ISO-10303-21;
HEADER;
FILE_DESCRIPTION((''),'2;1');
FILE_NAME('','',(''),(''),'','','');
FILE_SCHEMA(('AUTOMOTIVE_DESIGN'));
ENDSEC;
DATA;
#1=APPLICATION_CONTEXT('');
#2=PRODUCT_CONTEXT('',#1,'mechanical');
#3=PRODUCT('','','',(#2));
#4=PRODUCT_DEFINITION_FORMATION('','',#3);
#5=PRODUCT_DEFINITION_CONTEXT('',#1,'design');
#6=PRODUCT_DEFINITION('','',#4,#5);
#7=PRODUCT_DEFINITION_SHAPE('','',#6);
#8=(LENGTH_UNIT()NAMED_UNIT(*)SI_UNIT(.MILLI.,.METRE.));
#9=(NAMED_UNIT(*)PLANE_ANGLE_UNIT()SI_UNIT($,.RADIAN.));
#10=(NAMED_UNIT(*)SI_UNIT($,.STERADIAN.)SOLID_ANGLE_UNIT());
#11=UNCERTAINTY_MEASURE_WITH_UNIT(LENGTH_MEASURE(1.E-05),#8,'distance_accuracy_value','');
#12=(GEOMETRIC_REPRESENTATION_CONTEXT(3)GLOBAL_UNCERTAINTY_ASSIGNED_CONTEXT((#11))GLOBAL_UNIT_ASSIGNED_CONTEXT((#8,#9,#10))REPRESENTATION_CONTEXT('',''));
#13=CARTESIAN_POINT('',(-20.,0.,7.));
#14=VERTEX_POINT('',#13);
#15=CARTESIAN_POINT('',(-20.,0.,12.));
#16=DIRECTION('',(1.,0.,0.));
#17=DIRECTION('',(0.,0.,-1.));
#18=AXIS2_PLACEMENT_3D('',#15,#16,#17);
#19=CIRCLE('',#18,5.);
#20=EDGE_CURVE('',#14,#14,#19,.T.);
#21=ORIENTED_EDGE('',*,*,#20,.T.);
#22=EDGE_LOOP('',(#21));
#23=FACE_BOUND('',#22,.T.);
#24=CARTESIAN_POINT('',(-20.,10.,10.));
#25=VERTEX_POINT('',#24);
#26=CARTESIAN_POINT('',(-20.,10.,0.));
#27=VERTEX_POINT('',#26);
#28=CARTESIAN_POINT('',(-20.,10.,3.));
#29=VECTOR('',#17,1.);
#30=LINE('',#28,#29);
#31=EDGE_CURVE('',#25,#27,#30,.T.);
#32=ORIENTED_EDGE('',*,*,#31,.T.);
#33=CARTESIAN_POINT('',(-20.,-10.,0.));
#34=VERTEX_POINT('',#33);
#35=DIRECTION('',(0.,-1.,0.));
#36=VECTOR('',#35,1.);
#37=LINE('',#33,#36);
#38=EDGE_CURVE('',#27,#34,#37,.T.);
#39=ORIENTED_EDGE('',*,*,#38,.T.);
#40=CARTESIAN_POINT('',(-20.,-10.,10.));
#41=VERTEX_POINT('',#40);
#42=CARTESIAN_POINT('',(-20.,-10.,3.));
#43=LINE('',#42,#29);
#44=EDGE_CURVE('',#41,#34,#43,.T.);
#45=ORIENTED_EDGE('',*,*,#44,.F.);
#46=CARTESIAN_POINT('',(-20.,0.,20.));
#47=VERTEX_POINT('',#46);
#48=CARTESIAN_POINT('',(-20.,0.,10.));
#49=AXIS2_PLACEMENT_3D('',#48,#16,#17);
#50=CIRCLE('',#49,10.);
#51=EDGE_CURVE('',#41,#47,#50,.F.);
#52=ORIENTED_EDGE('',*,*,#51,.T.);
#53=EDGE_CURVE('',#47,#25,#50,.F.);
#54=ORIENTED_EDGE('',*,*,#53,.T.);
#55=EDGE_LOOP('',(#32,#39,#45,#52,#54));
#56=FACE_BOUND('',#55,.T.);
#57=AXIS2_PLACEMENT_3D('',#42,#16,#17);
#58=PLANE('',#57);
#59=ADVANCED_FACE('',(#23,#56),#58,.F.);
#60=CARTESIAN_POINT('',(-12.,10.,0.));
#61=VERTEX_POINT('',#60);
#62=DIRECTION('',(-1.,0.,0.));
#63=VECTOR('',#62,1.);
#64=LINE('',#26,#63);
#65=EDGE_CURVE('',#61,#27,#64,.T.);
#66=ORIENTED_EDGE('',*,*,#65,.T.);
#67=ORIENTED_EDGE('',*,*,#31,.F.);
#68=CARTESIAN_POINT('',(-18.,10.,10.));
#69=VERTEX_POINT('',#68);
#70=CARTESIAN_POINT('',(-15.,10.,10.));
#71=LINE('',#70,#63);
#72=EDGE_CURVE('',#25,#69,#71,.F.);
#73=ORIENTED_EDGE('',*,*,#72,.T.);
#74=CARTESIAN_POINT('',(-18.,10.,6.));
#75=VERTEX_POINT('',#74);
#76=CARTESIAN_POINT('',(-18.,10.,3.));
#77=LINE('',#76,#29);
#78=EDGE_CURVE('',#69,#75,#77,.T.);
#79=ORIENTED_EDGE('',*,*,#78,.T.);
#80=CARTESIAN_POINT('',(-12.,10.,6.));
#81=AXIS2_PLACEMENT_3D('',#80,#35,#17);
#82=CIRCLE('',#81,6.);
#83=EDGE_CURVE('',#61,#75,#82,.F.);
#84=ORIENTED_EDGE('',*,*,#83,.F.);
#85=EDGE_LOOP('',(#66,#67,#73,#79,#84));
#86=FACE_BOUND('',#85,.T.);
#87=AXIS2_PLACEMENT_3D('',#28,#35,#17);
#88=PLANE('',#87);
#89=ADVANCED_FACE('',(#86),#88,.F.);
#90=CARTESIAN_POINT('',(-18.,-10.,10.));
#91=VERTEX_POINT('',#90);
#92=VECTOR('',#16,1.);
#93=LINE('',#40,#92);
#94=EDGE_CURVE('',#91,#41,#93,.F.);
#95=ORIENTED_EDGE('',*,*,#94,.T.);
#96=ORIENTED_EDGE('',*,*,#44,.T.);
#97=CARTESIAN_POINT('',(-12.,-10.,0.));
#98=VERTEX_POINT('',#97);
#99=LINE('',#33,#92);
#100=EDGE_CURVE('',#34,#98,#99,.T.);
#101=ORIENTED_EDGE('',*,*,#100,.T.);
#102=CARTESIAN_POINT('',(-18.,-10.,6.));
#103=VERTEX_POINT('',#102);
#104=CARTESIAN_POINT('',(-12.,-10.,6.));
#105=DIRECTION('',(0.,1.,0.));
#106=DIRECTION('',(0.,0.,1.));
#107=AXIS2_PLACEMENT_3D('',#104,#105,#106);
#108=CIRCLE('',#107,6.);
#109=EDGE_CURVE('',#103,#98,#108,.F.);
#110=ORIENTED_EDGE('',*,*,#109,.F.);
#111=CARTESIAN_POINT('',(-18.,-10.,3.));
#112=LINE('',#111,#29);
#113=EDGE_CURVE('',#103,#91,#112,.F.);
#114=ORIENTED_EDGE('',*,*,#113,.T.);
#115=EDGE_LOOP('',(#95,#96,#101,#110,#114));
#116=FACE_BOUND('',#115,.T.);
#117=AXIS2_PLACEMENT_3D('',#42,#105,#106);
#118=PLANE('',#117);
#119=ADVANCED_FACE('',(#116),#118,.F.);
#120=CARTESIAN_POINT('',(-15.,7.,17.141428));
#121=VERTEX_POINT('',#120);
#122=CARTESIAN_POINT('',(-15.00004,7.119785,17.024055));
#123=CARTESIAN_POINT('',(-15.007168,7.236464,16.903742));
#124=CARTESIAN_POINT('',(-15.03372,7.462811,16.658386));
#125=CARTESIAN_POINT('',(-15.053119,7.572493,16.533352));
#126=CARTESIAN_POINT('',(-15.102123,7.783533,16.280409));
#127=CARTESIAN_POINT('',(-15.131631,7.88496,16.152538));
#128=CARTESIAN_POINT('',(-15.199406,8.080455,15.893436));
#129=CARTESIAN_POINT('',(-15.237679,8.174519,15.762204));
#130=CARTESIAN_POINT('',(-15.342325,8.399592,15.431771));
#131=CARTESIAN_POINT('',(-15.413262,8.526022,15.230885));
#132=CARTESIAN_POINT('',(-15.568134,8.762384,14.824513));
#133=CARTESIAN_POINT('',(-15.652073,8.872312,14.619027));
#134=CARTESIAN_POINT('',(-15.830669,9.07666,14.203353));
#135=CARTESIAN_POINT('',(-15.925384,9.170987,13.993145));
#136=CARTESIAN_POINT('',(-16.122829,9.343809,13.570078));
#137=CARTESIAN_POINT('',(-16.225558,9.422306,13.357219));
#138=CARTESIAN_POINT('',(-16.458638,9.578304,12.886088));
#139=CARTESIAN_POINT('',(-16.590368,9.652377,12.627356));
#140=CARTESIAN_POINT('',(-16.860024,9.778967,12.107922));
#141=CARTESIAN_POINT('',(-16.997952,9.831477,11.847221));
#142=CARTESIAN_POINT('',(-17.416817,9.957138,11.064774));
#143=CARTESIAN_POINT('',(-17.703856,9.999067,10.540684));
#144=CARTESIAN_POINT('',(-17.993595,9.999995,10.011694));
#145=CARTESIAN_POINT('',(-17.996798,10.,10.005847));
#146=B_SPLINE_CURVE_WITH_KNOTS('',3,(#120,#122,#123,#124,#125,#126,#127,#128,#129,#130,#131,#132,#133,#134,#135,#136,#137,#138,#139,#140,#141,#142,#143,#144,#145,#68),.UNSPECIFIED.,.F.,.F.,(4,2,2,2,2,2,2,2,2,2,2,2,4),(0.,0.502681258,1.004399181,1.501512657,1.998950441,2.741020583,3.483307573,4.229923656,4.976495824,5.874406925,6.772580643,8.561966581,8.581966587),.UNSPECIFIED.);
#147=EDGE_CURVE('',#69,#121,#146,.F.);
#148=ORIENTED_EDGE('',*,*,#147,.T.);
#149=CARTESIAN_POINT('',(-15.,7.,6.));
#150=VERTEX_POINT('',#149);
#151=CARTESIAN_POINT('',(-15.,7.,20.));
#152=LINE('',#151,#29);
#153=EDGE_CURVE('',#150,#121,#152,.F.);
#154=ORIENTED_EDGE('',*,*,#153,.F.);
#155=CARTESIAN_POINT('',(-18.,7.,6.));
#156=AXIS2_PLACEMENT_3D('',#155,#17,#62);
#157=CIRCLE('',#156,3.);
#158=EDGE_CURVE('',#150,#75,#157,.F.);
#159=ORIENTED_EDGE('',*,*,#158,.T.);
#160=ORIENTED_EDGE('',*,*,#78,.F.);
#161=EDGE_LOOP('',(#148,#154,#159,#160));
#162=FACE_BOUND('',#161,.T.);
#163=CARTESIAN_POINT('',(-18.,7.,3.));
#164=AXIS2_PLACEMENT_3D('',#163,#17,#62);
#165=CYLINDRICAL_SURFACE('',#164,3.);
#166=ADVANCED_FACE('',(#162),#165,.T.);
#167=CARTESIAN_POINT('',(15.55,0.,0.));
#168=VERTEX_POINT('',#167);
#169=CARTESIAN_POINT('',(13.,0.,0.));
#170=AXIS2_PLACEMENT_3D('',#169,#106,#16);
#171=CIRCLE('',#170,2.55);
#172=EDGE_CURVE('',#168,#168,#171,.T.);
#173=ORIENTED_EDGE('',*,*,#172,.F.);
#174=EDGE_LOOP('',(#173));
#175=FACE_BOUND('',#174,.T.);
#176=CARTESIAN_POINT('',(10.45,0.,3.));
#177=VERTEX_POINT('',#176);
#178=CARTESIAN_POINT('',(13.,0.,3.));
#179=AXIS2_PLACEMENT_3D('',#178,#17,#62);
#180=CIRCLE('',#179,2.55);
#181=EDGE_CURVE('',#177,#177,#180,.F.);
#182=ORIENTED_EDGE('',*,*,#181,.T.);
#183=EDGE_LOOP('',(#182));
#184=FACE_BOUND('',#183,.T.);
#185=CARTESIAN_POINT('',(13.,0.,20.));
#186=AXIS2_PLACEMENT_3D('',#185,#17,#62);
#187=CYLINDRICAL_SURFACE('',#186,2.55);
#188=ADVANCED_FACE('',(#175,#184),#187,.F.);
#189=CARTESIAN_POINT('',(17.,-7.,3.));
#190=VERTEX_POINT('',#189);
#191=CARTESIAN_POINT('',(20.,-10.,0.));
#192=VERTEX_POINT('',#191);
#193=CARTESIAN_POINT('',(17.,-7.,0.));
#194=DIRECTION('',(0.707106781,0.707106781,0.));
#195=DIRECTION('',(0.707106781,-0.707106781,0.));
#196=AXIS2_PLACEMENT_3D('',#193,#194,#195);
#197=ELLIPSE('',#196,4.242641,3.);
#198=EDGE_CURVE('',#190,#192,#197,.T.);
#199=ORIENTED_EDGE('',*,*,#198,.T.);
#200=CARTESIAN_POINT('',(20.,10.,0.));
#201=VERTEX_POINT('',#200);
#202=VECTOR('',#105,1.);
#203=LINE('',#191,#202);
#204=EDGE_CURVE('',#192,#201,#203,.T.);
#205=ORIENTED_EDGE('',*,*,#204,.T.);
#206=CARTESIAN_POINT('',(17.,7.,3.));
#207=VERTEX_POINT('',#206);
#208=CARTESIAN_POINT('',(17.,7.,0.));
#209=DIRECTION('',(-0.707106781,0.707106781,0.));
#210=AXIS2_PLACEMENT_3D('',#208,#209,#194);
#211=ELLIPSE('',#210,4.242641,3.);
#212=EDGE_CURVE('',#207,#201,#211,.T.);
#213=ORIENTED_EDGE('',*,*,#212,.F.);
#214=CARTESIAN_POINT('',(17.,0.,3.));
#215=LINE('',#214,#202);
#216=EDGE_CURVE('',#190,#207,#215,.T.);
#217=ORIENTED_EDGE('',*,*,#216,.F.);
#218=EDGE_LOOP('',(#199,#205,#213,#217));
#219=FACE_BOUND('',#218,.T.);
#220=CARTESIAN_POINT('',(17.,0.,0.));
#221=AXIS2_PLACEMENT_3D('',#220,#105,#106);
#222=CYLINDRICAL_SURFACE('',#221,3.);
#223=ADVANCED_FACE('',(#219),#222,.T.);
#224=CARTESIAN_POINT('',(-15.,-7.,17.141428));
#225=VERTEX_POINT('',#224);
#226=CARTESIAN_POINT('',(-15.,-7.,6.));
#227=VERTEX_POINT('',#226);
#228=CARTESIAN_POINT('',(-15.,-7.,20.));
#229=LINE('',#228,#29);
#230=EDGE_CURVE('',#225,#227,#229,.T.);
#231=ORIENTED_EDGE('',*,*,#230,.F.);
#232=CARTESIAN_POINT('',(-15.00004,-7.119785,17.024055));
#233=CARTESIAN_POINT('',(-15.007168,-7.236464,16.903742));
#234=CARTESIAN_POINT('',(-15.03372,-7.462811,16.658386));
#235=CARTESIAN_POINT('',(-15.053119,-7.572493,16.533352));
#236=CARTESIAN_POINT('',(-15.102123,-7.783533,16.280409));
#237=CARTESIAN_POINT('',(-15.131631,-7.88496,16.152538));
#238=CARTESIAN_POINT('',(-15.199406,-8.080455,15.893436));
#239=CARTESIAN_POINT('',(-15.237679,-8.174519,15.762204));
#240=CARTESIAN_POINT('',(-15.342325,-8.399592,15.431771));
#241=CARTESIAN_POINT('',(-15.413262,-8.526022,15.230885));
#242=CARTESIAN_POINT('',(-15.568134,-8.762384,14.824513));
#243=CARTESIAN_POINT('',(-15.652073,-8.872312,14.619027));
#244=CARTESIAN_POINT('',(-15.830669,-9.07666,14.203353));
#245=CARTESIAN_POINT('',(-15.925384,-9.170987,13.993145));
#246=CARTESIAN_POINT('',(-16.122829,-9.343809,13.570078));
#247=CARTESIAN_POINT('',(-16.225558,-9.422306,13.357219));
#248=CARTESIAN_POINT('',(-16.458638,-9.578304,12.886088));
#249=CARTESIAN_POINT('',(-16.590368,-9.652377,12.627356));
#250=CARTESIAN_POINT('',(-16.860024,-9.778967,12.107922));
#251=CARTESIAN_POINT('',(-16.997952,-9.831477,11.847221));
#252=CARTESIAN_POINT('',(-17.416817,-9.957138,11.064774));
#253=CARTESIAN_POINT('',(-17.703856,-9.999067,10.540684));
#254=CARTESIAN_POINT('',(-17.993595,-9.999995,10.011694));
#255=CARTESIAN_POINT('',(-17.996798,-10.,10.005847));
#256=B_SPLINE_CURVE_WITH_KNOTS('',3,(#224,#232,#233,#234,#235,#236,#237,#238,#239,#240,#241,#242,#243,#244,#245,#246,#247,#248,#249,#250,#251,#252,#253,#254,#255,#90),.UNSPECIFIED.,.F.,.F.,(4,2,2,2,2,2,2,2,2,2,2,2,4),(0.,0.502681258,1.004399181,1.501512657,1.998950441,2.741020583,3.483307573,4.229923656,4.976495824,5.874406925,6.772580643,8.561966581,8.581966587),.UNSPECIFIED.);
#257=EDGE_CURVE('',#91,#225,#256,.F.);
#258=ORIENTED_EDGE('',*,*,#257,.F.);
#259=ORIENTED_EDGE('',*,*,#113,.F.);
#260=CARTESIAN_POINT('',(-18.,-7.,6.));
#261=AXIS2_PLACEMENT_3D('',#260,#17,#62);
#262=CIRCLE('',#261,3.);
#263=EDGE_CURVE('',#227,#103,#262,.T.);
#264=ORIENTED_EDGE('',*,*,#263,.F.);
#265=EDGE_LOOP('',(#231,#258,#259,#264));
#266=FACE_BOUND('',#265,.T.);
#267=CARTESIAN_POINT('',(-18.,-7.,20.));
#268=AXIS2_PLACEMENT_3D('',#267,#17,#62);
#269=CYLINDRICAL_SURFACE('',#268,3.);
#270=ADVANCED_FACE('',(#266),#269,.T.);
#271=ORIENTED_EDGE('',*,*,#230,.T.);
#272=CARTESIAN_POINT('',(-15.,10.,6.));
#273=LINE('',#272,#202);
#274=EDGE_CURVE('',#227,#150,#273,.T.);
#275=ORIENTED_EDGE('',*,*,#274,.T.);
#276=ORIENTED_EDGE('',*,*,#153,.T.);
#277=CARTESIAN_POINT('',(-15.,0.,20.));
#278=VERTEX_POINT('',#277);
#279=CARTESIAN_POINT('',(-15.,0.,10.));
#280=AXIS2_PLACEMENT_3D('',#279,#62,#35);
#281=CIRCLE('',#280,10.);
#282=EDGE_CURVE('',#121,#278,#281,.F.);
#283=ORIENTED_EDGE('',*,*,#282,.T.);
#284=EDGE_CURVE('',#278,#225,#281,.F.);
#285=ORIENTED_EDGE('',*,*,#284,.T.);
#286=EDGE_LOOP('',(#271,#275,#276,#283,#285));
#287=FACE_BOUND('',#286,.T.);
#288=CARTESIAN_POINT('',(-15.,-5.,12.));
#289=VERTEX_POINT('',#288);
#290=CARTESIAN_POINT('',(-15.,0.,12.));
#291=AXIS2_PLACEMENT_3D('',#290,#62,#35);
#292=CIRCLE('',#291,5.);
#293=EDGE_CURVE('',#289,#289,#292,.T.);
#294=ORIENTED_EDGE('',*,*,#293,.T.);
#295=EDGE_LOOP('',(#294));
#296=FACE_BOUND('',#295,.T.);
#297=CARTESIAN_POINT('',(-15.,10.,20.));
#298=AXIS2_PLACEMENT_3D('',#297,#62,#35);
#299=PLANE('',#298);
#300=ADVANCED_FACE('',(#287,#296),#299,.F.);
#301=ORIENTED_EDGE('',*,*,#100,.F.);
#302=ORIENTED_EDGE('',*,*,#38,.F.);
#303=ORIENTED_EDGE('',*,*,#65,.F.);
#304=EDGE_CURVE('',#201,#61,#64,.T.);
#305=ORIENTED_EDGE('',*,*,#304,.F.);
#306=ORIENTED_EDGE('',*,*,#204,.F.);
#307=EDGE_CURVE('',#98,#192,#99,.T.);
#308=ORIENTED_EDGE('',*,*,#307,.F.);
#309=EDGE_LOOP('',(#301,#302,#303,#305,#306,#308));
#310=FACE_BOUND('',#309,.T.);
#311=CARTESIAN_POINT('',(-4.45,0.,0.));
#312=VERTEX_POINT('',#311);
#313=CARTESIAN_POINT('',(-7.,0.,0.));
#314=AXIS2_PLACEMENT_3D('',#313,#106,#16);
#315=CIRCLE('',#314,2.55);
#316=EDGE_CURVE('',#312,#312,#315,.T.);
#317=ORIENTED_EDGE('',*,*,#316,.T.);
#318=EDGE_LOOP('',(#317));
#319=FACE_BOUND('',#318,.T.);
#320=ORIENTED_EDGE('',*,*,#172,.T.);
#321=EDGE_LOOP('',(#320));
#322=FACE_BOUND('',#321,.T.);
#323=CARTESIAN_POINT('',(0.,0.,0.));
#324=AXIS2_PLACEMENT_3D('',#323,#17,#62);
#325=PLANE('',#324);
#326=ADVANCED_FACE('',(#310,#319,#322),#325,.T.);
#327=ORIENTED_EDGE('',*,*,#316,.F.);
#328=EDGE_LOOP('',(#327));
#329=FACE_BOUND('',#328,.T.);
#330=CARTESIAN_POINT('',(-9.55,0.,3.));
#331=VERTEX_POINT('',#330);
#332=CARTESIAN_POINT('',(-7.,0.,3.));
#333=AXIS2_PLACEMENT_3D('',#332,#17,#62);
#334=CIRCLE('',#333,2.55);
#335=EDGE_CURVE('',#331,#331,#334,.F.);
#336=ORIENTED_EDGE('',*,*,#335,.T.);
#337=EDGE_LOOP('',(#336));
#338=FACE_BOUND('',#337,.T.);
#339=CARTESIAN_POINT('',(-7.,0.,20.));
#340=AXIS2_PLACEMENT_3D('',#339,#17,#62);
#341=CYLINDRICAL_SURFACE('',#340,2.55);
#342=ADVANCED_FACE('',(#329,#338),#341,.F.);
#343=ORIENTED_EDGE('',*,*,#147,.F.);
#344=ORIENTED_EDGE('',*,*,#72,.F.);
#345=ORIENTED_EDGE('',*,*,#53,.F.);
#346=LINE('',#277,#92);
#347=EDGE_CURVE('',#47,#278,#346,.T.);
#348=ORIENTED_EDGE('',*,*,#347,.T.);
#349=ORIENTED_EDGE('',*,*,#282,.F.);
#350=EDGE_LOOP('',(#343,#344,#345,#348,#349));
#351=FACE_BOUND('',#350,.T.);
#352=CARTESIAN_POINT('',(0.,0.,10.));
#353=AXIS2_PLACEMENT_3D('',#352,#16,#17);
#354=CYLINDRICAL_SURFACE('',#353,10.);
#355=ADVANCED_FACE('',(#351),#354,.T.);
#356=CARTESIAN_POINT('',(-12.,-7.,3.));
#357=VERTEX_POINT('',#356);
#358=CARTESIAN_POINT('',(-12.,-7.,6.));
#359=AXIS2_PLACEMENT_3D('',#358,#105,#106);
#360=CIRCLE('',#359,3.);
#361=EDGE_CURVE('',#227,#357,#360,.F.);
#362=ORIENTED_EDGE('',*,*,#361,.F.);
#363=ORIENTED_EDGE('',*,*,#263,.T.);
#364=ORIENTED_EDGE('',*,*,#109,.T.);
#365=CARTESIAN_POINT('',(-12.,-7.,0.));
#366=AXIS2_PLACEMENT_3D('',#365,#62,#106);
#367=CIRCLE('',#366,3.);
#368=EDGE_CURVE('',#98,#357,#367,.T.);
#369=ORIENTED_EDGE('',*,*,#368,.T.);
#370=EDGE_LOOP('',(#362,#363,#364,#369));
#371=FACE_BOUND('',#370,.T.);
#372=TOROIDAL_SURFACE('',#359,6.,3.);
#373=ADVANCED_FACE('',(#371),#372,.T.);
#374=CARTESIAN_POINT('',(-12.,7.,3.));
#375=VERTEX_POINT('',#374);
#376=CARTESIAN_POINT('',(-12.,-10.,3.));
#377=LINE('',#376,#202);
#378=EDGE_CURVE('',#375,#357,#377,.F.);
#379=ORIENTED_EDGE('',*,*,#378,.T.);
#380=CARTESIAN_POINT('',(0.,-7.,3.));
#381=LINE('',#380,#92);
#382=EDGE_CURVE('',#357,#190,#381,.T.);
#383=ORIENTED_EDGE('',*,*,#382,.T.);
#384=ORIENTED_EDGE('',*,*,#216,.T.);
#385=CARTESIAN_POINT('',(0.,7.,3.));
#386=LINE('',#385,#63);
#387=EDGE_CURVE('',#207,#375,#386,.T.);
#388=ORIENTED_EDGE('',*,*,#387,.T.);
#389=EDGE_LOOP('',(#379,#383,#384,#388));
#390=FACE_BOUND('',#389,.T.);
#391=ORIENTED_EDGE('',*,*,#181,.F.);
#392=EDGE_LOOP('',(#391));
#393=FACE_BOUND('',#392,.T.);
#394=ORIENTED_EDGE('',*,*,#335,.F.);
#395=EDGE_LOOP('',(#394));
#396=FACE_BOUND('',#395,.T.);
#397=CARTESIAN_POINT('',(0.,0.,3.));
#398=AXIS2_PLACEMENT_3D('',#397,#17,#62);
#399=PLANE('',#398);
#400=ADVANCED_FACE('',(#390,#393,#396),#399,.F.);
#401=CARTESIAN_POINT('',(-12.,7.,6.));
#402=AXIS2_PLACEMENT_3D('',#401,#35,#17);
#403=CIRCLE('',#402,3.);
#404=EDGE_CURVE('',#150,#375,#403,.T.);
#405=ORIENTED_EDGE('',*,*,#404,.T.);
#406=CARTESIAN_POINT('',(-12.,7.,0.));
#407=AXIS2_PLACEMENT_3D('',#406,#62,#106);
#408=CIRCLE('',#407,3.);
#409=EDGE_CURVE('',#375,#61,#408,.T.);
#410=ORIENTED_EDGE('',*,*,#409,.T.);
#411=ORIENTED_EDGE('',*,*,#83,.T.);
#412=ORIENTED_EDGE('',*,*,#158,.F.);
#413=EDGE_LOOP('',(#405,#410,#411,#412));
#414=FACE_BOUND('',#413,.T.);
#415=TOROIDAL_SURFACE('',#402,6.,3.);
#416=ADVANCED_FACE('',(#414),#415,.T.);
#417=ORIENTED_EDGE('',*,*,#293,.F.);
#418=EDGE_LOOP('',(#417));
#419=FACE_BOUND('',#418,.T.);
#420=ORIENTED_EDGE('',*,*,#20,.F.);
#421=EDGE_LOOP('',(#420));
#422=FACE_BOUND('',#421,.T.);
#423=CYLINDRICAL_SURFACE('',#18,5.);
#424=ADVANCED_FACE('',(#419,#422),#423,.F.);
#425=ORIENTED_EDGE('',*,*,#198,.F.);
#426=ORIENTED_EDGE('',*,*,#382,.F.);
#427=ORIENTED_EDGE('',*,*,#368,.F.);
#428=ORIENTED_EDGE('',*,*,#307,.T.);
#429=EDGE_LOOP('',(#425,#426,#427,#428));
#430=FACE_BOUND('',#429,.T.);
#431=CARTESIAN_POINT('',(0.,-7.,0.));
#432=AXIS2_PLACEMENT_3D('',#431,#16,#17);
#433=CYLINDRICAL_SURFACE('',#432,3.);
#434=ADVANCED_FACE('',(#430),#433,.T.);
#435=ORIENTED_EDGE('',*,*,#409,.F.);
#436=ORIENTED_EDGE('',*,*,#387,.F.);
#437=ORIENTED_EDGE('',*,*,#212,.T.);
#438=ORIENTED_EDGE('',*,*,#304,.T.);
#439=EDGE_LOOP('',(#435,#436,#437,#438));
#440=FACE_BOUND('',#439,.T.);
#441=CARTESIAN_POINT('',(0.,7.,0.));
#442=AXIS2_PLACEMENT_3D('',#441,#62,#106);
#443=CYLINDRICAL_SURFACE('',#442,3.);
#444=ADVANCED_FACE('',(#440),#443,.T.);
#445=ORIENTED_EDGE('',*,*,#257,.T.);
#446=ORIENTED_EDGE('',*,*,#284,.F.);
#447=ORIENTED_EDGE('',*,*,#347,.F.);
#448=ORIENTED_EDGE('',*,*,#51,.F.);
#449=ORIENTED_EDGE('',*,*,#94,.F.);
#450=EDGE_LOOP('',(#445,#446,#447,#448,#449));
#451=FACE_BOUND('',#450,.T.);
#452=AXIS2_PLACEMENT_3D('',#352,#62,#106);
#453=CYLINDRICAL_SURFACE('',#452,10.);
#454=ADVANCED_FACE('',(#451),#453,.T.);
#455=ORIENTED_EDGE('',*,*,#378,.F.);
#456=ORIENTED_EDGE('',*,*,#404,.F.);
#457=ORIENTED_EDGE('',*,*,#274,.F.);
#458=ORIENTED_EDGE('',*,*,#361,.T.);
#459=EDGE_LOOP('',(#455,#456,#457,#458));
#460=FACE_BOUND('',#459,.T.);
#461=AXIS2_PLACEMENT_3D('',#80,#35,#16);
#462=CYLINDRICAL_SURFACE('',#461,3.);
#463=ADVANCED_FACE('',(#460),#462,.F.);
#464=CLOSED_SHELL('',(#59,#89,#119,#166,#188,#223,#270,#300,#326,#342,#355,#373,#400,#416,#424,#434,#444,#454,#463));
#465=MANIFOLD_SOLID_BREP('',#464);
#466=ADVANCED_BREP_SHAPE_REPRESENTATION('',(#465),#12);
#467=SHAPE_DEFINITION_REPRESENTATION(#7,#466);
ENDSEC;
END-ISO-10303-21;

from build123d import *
from OCP.BRepFilletAPI import BRepFilletAPI_MakeFillet

# Parameters (mm, degrees)
SKETCH1_W           = 40
SKETCH1_H           = 20
BOSS_EXTRUDE1_DEPTH = 3
SKETCH2_W           = 5
SKETCH2_H           = 20
BOSS_EXTRUDE2_DEPTH = 20
SKETCH3_R           = 5
CUT_EXTRUDE1_DEPTH  = 31
FILLET2_R           = 10
FILLET2_R_2         = 3
SKETCH4_R           = 2.55
CUT_EXTRUDE2_DEPTH  = 31.000000167


with BuildPart() as part:
    # Sketch1 → Boss-Extrude1 (new body)
    with BuildSketch(Plane.XY):
        Rectangle(SKETCH1_W, SKETCH1_H)
    extrude(amount=BOSS_EXTRUDE1_DEPTH)

    # Sketch2 → Boss-Extrude2 (add)
    with BuildSketch(Plane.XY):
        with Locations((-17.5, 0)):
            Rectangle(SKETCH2_W, SKETCH2_H)
    extrude(amount=BOSS_EXTRUDE2_DEPTH)

    # Sketch3 → Cut-Extrude1 (cut, through all)
    with BuildSketch(Plane(origin=(0, 0, 0), x_dir=(0, 0, -1), z_dir=(1, 0, 0))):
        with Locations((-12, 0)):
            Circle(SKETCH3_R)
    extrude(amount=-CUT_EXTRUDE1_DEPTH, mode=Mode.SUBTRACT)

    # Fillet2
    fillet2_edges_1 = [part.edges().sort_by_distance(p)[0] for p in [
        (-17.5, -10, 20),
        (-17.5, 10, 20),
    ]]
    fillet2_edges_2 = [part.edges().sort_by_distance(p)[0] for p in [
        (2.5, -10, 3),
        (-15, -10, 11.5),
        (-15, 0, 3),
        (-15, 10, 11.5),
        (20, 0, 3),
        (2.5, 10, 3),
    ]]
    fillet2 = BRepFilletAPI_MakeFillet(part.part.solid().wrapped)
    for e in fillet2_edges_1:
        fillet2.Add(FILLET2_R - 0.0001, e.wrapped)
    for e in fillet2_edges_2:
        fillet2.Add(FILLET2_R_2 - 0.0001, e.wrapped)
    add(Compound.cast(fillet2.Shape()), mode=Mode.REPLACE)  # a hair under: the kernel refuses the full size

    # Sketch4 → Cut-Extrude2 (cut, through all)
    with BuildSketch(Plane.XY):
        with Locations(Location((13, 0, 0), (0, 0, 180))):
            Circle(SKETCH4_R)
        with Locations(Location((-7, 0, 0), (0, 0, 180))):
            Circle(SKETCH4_R)
    extrude(amount=CUT_EXTRUDE2_DEPTH, mode=Mode.SUBTRACT)


solid = part.part
